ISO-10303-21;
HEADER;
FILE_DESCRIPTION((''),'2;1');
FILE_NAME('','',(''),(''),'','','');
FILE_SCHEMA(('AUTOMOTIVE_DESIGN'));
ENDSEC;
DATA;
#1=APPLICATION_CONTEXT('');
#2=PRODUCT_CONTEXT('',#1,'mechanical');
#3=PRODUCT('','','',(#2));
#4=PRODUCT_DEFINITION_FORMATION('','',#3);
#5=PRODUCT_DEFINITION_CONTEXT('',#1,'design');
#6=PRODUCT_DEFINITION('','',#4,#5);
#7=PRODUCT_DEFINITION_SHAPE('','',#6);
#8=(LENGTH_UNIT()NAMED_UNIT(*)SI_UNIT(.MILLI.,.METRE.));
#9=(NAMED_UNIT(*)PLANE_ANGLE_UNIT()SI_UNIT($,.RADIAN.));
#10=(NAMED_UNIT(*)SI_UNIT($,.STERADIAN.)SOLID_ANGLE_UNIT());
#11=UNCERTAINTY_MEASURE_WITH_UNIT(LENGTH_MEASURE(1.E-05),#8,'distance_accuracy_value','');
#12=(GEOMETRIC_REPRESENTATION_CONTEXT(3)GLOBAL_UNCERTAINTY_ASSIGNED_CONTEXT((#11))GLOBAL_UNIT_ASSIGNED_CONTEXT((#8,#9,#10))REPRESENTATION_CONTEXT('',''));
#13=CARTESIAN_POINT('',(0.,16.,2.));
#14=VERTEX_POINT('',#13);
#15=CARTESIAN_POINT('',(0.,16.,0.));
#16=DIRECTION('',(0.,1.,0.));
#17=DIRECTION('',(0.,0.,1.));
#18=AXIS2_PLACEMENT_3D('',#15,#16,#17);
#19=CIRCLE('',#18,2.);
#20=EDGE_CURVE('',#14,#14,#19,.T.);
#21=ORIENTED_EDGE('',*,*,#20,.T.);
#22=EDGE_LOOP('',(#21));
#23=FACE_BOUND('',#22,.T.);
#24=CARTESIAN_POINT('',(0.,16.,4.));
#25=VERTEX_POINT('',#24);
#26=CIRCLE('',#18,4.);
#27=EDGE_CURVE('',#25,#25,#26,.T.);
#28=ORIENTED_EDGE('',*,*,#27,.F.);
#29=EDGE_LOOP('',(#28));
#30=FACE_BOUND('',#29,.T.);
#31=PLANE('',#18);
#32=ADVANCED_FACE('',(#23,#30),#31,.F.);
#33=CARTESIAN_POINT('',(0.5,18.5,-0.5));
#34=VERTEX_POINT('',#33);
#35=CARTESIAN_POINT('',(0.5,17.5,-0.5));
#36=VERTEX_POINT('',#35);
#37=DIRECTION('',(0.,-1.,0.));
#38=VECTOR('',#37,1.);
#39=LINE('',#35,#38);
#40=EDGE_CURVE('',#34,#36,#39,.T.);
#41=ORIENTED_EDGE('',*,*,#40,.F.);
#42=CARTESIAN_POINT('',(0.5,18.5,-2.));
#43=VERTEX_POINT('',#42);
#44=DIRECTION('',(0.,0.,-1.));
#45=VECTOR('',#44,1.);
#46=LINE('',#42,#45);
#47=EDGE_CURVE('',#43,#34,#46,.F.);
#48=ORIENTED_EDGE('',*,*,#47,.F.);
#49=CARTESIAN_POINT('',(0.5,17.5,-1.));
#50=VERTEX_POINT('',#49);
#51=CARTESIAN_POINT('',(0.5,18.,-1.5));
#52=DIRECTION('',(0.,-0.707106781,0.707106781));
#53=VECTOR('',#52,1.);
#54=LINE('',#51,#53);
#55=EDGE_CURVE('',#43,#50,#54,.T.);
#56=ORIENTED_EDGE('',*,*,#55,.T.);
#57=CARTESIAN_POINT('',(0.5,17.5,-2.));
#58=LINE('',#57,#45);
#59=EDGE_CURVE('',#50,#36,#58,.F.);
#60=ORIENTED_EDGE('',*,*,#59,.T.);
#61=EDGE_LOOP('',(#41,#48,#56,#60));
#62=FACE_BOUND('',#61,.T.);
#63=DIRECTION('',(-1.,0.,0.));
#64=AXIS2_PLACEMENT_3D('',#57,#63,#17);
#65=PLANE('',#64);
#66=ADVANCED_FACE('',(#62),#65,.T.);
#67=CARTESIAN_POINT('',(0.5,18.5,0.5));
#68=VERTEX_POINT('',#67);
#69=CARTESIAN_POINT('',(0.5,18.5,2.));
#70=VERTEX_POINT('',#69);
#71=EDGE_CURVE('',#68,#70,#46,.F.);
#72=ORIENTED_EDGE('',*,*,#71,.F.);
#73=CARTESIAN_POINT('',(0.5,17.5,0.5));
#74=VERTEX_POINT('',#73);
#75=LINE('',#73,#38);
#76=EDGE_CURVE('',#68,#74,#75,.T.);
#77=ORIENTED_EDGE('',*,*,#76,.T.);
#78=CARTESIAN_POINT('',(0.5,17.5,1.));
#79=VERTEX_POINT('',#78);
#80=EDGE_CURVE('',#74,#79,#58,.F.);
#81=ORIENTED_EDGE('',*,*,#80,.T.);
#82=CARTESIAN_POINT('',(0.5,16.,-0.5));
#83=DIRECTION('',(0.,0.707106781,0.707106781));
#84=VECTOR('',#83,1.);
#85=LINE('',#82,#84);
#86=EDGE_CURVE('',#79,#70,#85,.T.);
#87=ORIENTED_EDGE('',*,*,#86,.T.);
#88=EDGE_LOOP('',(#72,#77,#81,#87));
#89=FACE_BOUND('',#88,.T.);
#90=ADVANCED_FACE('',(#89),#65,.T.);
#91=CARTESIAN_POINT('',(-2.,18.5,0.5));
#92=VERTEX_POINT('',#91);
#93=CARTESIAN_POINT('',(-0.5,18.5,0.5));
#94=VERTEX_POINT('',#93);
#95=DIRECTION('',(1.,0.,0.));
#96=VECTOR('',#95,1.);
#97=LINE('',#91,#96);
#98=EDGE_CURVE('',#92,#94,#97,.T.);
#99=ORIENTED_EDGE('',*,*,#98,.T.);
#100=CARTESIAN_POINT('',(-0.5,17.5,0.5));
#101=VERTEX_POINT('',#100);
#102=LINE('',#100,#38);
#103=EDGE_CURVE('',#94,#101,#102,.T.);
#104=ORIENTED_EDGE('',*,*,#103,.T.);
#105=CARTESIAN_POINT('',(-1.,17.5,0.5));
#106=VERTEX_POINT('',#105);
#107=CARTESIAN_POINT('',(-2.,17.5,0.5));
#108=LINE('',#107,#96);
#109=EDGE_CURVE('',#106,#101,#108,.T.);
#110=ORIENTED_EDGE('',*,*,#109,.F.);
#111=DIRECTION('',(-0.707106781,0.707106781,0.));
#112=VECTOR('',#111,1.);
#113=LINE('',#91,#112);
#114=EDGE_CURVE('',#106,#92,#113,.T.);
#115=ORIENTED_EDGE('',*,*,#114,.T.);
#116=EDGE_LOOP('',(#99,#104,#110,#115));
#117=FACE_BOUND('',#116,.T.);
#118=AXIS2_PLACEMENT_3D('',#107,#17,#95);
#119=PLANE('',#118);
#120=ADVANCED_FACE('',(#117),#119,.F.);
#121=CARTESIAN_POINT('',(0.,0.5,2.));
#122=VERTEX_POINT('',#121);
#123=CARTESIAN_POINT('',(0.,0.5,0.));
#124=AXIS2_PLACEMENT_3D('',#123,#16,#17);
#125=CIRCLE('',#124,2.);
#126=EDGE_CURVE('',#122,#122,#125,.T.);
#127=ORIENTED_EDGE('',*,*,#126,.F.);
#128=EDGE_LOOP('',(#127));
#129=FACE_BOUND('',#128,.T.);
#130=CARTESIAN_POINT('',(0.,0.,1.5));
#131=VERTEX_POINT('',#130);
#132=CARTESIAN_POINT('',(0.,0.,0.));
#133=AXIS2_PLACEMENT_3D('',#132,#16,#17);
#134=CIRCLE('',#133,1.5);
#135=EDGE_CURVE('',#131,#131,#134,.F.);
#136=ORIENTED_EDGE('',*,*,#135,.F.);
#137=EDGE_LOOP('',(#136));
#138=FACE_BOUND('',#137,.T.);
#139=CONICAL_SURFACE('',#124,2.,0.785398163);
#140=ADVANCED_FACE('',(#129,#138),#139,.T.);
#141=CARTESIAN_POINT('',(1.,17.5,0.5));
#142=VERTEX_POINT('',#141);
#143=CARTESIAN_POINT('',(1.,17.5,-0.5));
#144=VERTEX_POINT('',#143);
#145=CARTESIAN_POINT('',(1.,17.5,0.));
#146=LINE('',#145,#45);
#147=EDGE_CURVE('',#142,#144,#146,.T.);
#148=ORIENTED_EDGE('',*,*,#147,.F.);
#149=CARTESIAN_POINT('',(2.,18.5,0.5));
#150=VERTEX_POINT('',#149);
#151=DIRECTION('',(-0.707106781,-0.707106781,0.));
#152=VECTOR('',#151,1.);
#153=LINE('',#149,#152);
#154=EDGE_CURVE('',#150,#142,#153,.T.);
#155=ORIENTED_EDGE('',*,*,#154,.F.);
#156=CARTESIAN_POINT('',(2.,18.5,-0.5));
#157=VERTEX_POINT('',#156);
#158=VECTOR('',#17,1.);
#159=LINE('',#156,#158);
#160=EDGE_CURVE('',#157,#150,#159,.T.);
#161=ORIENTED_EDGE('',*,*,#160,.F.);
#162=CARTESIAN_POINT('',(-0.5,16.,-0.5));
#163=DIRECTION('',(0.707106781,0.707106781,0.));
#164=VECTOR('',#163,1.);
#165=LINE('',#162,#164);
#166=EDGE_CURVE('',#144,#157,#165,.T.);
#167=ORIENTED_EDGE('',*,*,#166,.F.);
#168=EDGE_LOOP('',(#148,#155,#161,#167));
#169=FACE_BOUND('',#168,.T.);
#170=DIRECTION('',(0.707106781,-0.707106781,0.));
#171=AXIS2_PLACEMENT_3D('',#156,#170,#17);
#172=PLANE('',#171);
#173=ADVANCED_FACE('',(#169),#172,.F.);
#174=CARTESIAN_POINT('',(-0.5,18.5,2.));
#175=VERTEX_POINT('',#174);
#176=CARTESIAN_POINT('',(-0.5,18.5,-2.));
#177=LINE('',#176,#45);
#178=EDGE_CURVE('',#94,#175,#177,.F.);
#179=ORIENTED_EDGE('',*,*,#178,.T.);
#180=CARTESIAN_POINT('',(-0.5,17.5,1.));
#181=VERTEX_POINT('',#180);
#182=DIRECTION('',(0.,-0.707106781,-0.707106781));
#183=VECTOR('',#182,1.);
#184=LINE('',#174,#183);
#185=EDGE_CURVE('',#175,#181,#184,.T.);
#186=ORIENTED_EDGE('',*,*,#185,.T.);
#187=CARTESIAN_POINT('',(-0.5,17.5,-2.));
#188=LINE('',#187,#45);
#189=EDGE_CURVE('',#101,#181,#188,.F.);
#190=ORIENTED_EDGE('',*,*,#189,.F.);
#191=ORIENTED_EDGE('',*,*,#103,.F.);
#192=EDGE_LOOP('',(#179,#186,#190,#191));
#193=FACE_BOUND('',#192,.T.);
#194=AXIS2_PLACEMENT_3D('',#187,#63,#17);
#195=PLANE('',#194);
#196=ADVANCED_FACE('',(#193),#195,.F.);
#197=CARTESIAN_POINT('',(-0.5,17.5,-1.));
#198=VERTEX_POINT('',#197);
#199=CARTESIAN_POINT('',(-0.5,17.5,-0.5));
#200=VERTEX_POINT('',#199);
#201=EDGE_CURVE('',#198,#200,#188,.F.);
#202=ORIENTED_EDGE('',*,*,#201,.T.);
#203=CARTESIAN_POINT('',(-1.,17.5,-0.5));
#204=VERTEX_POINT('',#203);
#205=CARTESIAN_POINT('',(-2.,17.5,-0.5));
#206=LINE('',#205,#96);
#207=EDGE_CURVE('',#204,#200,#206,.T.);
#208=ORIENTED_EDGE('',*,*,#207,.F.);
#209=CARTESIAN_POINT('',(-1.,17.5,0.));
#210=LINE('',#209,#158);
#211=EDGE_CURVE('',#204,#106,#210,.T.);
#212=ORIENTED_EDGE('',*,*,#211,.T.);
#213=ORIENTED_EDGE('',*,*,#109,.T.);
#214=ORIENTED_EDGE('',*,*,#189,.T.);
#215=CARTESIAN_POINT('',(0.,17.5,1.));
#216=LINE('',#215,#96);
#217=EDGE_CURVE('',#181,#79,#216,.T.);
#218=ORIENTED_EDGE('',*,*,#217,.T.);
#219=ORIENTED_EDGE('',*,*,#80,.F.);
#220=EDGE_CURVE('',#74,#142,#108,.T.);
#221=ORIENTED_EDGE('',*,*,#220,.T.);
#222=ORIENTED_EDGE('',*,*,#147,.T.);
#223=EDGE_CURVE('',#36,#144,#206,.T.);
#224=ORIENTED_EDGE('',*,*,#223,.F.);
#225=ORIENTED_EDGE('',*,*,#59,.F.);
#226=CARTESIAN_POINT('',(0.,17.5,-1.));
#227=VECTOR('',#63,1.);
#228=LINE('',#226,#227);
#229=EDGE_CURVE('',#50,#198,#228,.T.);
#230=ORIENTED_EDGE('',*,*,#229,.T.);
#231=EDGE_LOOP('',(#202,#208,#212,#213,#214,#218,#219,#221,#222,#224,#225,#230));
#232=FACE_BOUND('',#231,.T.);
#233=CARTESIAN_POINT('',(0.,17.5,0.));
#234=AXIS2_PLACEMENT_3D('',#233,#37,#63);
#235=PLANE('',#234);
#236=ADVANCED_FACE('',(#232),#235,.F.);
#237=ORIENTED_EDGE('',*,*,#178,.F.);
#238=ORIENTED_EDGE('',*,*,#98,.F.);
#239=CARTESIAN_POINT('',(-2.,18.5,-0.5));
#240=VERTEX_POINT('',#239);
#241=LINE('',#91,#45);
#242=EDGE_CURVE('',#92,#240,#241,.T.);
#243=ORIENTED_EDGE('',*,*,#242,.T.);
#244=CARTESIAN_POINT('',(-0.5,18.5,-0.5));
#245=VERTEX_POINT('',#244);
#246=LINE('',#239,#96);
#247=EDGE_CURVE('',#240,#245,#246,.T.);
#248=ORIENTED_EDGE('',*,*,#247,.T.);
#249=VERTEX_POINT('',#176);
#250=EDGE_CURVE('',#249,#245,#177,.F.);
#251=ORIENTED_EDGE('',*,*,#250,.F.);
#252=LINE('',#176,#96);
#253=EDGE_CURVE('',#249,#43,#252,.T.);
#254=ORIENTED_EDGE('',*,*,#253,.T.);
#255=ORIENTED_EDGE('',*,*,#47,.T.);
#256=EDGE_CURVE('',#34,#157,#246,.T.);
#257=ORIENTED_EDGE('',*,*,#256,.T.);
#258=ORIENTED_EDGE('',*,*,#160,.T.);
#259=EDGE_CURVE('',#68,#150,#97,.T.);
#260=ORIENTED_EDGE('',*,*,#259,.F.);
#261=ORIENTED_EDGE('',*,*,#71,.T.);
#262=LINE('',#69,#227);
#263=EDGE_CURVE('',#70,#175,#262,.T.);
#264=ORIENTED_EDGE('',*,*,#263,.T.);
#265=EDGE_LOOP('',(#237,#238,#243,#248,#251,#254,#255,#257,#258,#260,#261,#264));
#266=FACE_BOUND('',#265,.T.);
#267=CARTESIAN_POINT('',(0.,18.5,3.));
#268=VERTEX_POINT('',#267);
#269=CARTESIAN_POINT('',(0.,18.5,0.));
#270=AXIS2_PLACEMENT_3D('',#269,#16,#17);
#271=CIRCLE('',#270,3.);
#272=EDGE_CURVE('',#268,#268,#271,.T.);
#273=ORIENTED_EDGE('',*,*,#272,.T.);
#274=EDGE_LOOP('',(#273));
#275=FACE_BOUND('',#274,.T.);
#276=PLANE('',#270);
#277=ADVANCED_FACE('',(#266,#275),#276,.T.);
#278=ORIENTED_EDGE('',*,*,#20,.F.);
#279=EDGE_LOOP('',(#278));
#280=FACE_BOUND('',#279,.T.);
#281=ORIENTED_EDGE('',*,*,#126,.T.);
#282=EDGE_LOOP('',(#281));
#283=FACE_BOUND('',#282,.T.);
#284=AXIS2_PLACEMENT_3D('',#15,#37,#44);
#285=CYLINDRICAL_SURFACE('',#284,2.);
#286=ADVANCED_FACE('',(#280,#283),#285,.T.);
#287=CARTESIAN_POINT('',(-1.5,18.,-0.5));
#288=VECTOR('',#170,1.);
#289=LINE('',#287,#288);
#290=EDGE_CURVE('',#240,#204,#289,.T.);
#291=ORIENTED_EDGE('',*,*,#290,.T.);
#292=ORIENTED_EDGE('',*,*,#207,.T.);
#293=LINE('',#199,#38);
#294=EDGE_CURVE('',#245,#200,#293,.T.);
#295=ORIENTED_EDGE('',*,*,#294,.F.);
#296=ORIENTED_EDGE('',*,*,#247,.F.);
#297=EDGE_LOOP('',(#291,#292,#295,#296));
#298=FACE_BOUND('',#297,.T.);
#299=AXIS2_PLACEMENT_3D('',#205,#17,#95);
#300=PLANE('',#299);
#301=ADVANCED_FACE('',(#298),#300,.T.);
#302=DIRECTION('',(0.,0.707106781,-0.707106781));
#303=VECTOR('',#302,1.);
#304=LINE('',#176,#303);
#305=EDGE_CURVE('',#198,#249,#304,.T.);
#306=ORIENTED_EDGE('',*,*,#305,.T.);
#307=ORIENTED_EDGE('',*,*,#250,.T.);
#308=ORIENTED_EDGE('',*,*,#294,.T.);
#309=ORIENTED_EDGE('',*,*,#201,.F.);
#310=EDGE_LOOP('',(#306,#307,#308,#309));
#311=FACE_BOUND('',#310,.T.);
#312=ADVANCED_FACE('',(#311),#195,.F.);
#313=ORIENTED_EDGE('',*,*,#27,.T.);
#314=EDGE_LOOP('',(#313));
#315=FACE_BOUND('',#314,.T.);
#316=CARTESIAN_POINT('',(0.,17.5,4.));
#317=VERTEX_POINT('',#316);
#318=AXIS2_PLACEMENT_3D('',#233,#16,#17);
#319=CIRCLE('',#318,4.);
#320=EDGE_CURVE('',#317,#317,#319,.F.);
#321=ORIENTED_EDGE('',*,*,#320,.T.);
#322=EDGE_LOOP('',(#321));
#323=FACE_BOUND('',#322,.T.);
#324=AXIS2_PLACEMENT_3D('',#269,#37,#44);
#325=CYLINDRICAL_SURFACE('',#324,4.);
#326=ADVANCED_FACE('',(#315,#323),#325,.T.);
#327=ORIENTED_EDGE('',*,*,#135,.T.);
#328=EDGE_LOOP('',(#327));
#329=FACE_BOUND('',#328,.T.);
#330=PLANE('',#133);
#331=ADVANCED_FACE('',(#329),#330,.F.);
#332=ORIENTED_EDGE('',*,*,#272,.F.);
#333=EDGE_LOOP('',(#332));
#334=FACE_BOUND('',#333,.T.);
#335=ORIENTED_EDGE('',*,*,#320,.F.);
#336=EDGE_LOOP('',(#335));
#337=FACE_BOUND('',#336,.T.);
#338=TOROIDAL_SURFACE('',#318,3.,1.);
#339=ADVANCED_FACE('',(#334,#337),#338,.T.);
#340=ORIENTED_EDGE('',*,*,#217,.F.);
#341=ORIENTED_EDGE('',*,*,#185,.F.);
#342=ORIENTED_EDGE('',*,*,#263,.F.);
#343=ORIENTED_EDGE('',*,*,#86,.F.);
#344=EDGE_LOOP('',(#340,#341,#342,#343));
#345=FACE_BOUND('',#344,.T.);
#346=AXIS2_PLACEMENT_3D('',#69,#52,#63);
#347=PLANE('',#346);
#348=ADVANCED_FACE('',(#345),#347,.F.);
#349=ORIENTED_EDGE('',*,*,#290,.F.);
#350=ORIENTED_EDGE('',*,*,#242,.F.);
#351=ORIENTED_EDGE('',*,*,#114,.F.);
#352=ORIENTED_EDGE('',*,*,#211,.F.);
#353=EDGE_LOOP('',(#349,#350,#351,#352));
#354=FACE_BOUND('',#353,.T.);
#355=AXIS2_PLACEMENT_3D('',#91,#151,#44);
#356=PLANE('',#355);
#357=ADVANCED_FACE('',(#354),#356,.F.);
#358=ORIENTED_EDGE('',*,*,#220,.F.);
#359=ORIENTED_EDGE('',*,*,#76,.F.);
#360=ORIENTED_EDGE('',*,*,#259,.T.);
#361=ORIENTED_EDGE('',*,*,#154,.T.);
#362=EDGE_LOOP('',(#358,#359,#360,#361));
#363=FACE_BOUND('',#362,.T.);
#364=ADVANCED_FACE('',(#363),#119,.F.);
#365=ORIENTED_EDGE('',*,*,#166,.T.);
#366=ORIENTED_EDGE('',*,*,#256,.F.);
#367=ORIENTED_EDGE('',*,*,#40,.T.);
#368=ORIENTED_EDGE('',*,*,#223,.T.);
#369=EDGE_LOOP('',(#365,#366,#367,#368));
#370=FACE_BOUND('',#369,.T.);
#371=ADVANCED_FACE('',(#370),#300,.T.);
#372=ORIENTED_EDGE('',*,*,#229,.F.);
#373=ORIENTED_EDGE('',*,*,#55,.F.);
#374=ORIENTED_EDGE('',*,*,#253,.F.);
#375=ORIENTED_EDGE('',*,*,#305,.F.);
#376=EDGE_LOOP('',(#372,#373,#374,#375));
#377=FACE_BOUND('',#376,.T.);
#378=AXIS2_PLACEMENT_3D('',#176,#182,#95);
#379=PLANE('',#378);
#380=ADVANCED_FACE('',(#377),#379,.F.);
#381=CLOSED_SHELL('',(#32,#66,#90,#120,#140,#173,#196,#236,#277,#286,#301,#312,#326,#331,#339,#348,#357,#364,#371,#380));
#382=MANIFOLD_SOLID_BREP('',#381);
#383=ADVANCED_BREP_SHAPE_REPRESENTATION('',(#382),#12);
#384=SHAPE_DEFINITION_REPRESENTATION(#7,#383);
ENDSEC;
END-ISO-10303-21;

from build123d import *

# Parameters (mm, degrees)
SKETCH_1_R          = 2
EXTRUDE_1_DEPTH     = 16
SKETCH_2_R          = 4
EXTRUDE_2_DEPTH     = 2.5
FILLET_1_R          = 1
CHAMFER_1_SIZE      = 0.5
SKETCH_3_W          = 4
SKETCH_3_H          = 1
SKETCH_3_W_2        = 1
SKETCH_3_H_2        = 4
CUT_EXTRUDE_1_DEPTH = 1
CHAMFER_2_SIZE      = 1


with BuildPart() as part:
    # 草图1 → 凸台-拉伸1 (new body)
    with BuildSketch(Plane(origin=(0, 0, 0), x_dir=(1, 0, 0), z_dir=(0, 1, 0))):
        with Locations(Location((0, 0, 0), (0, 0, 270))):
            Circle(SKETCH_1_R)
    extrude(amount=EXTRUDE_1_DEPTH)

    # 草图2 → 凸台-拉伸2 (add)
    with BuildSketch(Plane(origin=(0, 16, 0), x_dir=(1, 0, 0), z_dir=(0, 1, 0))):
        with Locations(Location((0, 0, 0), (0, 0, 270))):
            Circle(SKETCH_2_R)
    extrude(amount=EXTRUDE_2_DEPTH)

    # 圆角1
    fillet_1_edges = [part.edges().sort_by_distance(p)[0] for p in [
        (0, 18.5, -4),
    ]]
    fillet(fillet_1_edges, radius=FILLET_1_R)

    # 倒角1
    chamfer_1_edges = [part.edges().sort_by_distance(p)[0] for p in [
        (0, 0, -2),
    ]]
    chamfer(chamfer_1_edges, length=CHAMFER_1_SIZE)

    # 草图3 → 切除-拉伸-薄壁1 (cut)
    with BuildSketch(Plane(origin=(0, 18.5, 0), x_dir=(1, 0, 0), z_dir=(0, 1, 0))):
        Rectangle(SKETCH_3_W, SKETCH_3_H)
        Rectangle(SKETCH_3_W_2, SKETCH_3_H_2)
    extrude(amount=-CUT_EXTRUDE_1_DEPTH, mode=Mode.SUBTRACT)

    # 倒角2
    chamfer_2_edges = [part.edges().sort_by_distance(p)[0] for p in [
        (0, 17.5, 2),
        (2, 17.5, 0),
        (0, 17.5, -2),
        (-2, 17.5, 0),
    ]]
    chamfer(chamfer_2_edges, length=CHAMFER_2_SIZE - 0.0001)  # a hair under: the kernel refuses the full size


solid = part.part
